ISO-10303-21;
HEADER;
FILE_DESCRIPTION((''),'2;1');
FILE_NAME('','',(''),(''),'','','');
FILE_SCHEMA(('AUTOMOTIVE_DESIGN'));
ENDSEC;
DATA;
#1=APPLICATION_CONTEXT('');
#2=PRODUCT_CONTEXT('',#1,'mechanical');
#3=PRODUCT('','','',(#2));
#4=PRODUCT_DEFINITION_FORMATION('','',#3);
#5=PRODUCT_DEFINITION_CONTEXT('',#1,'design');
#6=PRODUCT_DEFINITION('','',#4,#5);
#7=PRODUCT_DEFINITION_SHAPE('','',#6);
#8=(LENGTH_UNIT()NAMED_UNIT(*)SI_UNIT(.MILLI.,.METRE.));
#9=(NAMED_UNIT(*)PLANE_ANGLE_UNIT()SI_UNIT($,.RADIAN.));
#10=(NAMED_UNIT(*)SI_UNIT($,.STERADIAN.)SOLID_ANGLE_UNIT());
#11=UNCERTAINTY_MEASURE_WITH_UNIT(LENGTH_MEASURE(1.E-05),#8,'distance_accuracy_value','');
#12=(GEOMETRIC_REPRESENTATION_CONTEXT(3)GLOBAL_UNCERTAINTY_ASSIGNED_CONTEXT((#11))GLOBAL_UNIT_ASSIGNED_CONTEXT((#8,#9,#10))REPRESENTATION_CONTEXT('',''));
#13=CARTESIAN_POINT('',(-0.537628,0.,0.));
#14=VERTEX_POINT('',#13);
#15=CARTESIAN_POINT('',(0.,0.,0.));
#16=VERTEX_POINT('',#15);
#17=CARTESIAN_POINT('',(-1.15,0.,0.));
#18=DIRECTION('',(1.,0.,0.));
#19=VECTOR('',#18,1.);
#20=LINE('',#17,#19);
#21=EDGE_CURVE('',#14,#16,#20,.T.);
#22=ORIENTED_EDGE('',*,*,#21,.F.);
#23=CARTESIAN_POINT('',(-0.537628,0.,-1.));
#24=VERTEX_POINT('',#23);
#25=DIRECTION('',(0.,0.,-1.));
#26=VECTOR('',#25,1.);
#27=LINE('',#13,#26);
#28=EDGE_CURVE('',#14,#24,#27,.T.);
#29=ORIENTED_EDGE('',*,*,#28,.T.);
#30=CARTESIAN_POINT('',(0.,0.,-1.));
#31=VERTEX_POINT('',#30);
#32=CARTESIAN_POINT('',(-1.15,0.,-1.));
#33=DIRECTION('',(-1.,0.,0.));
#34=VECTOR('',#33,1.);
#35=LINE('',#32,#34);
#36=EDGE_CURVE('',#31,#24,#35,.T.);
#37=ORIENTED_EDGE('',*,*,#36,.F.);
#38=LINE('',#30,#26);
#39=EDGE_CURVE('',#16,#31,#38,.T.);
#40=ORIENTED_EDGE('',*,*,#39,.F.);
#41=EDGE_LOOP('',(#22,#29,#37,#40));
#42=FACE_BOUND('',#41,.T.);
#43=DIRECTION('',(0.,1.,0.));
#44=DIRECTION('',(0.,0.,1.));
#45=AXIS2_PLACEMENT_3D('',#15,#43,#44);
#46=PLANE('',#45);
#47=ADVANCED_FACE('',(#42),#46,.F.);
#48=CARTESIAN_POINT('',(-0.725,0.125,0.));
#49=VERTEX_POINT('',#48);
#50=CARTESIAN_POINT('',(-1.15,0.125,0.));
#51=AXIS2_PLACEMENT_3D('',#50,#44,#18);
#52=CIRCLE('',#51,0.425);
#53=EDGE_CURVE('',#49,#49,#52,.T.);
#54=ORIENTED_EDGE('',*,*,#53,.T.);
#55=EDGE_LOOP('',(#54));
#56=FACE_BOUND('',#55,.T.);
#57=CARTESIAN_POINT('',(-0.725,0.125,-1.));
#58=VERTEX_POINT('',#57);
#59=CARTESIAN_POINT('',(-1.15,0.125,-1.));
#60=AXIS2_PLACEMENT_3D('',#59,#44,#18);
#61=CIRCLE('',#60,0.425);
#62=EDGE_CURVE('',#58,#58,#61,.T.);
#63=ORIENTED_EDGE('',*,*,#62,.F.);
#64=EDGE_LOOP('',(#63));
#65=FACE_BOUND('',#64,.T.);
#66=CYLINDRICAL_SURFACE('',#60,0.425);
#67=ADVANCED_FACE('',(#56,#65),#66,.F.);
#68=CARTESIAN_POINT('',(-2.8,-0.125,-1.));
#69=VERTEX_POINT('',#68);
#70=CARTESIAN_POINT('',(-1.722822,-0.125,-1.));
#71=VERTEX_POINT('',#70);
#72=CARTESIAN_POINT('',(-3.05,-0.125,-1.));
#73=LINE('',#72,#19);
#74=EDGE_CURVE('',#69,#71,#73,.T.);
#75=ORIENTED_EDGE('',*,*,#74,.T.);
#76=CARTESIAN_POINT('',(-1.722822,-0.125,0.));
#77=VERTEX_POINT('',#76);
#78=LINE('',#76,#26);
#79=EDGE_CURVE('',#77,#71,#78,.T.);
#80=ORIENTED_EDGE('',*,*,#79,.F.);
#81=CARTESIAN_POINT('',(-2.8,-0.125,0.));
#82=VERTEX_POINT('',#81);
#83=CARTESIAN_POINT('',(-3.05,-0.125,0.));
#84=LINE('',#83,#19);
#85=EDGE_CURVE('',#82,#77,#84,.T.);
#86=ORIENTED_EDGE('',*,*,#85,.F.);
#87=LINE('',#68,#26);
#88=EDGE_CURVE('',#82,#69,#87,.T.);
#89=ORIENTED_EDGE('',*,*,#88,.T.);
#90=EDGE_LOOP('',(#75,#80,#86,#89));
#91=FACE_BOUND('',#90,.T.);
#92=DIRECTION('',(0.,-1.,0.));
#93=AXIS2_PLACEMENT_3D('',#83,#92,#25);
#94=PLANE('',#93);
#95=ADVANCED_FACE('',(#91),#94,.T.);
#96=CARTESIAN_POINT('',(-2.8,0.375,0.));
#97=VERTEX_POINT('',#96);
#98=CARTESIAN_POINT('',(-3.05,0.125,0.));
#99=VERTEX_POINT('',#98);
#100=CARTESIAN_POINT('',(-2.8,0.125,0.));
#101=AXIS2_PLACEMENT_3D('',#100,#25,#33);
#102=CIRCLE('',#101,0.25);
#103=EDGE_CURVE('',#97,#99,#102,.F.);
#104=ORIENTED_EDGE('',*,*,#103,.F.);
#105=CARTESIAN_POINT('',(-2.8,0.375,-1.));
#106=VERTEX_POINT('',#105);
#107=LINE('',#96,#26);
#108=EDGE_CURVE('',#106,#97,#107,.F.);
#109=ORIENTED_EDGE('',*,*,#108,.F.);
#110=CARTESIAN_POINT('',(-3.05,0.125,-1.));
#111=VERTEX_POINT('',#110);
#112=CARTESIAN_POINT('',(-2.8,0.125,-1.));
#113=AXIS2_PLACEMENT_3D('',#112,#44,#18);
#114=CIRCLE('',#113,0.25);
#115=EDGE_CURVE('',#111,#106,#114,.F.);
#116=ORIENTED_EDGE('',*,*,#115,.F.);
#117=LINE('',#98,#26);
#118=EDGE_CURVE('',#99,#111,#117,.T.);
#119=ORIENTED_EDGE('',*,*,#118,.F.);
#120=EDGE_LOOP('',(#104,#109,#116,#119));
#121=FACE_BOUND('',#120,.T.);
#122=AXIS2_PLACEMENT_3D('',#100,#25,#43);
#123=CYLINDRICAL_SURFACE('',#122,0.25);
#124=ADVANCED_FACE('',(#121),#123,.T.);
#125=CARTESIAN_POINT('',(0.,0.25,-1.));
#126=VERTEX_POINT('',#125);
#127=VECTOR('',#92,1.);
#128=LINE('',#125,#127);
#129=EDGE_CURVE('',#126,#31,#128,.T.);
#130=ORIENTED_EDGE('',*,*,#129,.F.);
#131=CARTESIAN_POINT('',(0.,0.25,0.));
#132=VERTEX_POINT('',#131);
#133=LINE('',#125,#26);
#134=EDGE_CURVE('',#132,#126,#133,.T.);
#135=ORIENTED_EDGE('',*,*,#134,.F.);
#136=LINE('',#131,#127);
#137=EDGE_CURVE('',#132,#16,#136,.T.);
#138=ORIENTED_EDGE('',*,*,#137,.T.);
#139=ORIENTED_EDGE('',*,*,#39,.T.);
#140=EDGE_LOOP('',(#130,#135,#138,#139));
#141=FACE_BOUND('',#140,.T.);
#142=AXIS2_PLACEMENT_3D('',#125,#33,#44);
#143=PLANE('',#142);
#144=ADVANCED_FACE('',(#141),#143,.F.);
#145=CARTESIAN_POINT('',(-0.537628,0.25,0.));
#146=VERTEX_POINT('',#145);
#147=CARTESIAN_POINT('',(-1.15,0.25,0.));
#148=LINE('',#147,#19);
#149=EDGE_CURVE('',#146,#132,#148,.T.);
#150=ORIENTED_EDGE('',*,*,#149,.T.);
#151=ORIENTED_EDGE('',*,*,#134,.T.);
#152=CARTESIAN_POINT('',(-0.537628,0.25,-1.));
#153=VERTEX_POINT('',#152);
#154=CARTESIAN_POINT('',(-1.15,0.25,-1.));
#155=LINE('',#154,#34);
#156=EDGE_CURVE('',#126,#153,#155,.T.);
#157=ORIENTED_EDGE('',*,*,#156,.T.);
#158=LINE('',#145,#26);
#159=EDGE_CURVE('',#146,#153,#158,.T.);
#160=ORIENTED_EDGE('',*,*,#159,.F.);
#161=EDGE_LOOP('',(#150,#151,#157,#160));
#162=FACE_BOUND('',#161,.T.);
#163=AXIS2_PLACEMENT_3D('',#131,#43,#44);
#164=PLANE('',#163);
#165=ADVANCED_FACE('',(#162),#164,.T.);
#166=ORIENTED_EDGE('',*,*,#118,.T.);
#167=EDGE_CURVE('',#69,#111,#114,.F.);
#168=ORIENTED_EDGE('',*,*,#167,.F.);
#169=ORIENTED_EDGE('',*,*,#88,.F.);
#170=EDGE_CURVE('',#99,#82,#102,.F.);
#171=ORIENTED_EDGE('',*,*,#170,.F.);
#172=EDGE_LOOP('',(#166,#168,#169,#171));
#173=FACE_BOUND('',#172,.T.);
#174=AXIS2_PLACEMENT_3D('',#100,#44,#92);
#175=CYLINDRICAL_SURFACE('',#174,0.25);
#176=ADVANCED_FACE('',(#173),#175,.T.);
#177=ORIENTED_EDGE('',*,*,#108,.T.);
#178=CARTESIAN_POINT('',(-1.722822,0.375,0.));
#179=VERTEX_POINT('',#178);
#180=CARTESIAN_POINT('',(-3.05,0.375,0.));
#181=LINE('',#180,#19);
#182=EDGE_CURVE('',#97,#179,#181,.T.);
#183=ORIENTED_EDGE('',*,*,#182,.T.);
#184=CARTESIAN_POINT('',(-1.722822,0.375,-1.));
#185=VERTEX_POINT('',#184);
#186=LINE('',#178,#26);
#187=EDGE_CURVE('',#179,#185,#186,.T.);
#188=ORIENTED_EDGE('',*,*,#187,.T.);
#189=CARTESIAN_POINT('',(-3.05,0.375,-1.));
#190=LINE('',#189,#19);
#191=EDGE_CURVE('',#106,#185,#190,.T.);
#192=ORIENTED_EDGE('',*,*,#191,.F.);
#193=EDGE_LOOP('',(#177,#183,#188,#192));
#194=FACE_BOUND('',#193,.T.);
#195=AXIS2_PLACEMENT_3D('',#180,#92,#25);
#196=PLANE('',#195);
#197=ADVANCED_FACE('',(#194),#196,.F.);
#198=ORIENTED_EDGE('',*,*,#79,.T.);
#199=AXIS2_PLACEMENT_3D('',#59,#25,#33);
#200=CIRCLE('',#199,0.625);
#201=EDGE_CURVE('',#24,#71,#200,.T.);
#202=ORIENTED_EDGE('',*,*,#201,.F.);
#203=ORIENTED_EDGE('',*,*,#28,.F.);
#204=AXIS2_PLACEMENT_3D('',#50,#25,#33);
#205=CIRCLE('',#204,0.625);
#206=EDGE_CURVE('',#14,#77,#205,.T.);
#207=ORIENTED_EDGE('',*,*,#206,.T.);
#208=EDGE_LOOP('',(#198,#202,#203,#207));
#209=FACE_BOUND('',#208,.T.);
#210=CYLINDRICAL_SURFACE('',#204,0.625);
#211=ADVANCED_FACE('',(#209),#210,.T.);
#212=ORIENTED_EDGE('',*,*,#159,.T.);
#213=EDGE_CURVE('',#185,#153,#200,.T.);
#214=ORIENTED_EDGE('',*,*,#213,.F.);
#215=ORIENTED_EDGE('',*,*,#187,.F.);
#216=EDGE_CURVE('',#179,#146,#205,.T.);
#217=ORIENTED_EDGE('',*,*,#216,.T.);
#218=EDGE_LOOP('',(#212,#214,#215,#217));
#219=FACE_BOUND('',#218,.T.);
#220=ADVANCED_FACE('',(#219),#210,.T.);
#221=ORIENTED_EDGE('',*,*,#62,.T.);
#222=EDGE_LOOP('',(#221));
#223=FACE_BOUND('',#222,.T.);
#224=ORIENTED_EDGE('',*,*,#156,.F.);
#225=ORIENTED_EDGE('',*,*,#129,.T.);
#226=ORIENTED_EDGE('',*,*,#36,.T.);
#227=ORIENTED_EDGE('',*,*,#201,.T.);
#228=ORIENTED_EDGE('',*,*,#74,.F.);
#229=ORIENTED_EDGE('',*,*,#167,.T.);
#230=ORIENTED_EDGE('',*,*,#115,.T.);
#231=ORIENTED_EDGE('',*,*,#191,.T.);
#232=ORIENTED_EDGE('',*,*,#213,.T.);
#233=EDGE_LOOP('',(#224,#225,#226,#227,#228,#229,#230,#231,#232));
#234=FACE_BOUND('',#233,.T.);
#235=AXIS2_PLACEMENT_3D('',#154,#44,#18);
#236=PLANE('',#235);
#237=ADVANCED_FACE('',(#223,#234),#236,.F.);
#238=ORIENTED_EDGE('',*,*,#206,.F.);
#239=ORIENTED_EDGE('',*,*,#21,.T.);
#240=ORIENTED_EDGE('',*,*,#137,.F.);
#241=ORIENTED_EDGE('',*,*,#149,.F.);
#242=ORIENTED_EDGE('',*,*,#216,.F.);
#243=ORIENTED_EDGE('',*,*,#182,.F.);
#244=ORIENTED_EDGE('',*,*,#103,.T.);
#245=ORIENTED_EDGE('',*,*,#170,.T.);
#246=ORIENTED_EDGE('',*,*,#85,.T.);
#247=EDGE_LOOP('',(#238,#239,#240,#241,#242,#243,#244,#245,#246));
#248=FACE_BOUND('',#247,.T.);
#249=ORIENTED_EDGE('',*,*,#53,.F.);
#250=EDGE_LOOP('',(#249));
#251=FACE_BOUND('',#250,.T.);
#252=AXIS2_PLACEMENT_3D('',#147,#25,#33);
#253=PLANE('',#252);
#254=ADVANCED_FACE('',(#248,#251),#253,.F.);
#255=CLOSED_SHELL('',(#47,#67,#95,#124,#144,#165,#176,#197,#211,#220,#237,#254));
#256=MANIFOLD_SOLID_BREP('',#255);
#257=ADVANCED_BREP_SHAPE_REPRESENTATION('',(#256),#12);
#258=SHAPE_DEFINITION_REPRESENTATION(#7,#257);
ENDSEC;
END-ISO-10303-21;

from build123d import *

# Parameters (mm, degrees)
SKETCH1_W               = 1.15
SKETCH1_H               = 1
BOSS_EXTRUDE1_DEPTH     = 0.25
SKETCH2_W               = 1
SKETCH2_H               = 0.5
BOSS_EXTRUDE2_DEPTH     = 1.9
SKETCH3_R               = 0.625
BOSS_EXTRUDE3_DEPTH     = 1
CUT_EXTRUDE1_DEPTH      = 4.296209945
CUT_EXTRUDE1_DEPTH_BACK = 4.296209945
SKETCH4_R               = 0.425
FILLET2_R               = 0.25
FILLET3_R               = 0.25


with BuildPart() as part:
    # Sketch1 → Boss-Extrude1 (new body)
    with BuildSketch(Plane(origin=(0, 0, 0), x_dir=(1, 0, 0), z_dir=(0, 1, 0))):
        with Locations((-0.575, 0.5)):
            Rectangle(SKETCH1_W, SKETCH1_H)
    extrude(amount=BOSS_EXTRUDE1_DEPTH)

    # Sketch2 → Boss-Extrude2 (add)
    with BuildSketch(Plane.ZY.offset(1.15)):
        with Locations((-0.5, 0.125)):
            Rectangle(SKETCH2_W, SKETCH2_H)
    extrude(amount=BOSS_EXTRUDE2_DEPTH)

    # Sketch3 → Boss-Extrude3 (add)
    with BuildSketch(Plane(origin=(0, 0, -1), x_dir=(-1, 0, 0), z_dir=(0, 0, -1))):
        with Locations((1.15, 0.125)):
            Circle(SKETCH3_R)
    extrude(amount=-BOSS_EXTRUDE3_DEPTH)

    # Sketch4 → Cut-Extrude1 (cut, two sides: drawn at the far end of the back side and taken through both)
    with BuildSketch(Plane.XY.offset(-CUT_EXTRUDE1_DEPTH_BACK)):
        with Locations((-1.15, 0.125)):
            Circle(SKETCH4_R)
    extrude(amount=CUT_EXTRUDE1_DEPTH + CUT_EXTRUDE1_DEPTH_BACK, mode=Mode.SUBTRACT)

    # Fillet2
    fillet2_edges = [part.edges().sort_by_distance(p)[0] for p in [
        (-3.05, 0.375, -0.5),
    ]]
    fillet(fillet2_edges, radius=FILLET2_R)

    # Fillet3
    fillet3_edges = [part.edges().sort_by_distance(p)[0] for p in [
        (-3.05, -0.125, -0.5),
    ]]
    fillet(fillet3_edges, radius=FILLET3_R - 0.0001)  # a hair under: the kernel refuses the full size


solid = part.part
